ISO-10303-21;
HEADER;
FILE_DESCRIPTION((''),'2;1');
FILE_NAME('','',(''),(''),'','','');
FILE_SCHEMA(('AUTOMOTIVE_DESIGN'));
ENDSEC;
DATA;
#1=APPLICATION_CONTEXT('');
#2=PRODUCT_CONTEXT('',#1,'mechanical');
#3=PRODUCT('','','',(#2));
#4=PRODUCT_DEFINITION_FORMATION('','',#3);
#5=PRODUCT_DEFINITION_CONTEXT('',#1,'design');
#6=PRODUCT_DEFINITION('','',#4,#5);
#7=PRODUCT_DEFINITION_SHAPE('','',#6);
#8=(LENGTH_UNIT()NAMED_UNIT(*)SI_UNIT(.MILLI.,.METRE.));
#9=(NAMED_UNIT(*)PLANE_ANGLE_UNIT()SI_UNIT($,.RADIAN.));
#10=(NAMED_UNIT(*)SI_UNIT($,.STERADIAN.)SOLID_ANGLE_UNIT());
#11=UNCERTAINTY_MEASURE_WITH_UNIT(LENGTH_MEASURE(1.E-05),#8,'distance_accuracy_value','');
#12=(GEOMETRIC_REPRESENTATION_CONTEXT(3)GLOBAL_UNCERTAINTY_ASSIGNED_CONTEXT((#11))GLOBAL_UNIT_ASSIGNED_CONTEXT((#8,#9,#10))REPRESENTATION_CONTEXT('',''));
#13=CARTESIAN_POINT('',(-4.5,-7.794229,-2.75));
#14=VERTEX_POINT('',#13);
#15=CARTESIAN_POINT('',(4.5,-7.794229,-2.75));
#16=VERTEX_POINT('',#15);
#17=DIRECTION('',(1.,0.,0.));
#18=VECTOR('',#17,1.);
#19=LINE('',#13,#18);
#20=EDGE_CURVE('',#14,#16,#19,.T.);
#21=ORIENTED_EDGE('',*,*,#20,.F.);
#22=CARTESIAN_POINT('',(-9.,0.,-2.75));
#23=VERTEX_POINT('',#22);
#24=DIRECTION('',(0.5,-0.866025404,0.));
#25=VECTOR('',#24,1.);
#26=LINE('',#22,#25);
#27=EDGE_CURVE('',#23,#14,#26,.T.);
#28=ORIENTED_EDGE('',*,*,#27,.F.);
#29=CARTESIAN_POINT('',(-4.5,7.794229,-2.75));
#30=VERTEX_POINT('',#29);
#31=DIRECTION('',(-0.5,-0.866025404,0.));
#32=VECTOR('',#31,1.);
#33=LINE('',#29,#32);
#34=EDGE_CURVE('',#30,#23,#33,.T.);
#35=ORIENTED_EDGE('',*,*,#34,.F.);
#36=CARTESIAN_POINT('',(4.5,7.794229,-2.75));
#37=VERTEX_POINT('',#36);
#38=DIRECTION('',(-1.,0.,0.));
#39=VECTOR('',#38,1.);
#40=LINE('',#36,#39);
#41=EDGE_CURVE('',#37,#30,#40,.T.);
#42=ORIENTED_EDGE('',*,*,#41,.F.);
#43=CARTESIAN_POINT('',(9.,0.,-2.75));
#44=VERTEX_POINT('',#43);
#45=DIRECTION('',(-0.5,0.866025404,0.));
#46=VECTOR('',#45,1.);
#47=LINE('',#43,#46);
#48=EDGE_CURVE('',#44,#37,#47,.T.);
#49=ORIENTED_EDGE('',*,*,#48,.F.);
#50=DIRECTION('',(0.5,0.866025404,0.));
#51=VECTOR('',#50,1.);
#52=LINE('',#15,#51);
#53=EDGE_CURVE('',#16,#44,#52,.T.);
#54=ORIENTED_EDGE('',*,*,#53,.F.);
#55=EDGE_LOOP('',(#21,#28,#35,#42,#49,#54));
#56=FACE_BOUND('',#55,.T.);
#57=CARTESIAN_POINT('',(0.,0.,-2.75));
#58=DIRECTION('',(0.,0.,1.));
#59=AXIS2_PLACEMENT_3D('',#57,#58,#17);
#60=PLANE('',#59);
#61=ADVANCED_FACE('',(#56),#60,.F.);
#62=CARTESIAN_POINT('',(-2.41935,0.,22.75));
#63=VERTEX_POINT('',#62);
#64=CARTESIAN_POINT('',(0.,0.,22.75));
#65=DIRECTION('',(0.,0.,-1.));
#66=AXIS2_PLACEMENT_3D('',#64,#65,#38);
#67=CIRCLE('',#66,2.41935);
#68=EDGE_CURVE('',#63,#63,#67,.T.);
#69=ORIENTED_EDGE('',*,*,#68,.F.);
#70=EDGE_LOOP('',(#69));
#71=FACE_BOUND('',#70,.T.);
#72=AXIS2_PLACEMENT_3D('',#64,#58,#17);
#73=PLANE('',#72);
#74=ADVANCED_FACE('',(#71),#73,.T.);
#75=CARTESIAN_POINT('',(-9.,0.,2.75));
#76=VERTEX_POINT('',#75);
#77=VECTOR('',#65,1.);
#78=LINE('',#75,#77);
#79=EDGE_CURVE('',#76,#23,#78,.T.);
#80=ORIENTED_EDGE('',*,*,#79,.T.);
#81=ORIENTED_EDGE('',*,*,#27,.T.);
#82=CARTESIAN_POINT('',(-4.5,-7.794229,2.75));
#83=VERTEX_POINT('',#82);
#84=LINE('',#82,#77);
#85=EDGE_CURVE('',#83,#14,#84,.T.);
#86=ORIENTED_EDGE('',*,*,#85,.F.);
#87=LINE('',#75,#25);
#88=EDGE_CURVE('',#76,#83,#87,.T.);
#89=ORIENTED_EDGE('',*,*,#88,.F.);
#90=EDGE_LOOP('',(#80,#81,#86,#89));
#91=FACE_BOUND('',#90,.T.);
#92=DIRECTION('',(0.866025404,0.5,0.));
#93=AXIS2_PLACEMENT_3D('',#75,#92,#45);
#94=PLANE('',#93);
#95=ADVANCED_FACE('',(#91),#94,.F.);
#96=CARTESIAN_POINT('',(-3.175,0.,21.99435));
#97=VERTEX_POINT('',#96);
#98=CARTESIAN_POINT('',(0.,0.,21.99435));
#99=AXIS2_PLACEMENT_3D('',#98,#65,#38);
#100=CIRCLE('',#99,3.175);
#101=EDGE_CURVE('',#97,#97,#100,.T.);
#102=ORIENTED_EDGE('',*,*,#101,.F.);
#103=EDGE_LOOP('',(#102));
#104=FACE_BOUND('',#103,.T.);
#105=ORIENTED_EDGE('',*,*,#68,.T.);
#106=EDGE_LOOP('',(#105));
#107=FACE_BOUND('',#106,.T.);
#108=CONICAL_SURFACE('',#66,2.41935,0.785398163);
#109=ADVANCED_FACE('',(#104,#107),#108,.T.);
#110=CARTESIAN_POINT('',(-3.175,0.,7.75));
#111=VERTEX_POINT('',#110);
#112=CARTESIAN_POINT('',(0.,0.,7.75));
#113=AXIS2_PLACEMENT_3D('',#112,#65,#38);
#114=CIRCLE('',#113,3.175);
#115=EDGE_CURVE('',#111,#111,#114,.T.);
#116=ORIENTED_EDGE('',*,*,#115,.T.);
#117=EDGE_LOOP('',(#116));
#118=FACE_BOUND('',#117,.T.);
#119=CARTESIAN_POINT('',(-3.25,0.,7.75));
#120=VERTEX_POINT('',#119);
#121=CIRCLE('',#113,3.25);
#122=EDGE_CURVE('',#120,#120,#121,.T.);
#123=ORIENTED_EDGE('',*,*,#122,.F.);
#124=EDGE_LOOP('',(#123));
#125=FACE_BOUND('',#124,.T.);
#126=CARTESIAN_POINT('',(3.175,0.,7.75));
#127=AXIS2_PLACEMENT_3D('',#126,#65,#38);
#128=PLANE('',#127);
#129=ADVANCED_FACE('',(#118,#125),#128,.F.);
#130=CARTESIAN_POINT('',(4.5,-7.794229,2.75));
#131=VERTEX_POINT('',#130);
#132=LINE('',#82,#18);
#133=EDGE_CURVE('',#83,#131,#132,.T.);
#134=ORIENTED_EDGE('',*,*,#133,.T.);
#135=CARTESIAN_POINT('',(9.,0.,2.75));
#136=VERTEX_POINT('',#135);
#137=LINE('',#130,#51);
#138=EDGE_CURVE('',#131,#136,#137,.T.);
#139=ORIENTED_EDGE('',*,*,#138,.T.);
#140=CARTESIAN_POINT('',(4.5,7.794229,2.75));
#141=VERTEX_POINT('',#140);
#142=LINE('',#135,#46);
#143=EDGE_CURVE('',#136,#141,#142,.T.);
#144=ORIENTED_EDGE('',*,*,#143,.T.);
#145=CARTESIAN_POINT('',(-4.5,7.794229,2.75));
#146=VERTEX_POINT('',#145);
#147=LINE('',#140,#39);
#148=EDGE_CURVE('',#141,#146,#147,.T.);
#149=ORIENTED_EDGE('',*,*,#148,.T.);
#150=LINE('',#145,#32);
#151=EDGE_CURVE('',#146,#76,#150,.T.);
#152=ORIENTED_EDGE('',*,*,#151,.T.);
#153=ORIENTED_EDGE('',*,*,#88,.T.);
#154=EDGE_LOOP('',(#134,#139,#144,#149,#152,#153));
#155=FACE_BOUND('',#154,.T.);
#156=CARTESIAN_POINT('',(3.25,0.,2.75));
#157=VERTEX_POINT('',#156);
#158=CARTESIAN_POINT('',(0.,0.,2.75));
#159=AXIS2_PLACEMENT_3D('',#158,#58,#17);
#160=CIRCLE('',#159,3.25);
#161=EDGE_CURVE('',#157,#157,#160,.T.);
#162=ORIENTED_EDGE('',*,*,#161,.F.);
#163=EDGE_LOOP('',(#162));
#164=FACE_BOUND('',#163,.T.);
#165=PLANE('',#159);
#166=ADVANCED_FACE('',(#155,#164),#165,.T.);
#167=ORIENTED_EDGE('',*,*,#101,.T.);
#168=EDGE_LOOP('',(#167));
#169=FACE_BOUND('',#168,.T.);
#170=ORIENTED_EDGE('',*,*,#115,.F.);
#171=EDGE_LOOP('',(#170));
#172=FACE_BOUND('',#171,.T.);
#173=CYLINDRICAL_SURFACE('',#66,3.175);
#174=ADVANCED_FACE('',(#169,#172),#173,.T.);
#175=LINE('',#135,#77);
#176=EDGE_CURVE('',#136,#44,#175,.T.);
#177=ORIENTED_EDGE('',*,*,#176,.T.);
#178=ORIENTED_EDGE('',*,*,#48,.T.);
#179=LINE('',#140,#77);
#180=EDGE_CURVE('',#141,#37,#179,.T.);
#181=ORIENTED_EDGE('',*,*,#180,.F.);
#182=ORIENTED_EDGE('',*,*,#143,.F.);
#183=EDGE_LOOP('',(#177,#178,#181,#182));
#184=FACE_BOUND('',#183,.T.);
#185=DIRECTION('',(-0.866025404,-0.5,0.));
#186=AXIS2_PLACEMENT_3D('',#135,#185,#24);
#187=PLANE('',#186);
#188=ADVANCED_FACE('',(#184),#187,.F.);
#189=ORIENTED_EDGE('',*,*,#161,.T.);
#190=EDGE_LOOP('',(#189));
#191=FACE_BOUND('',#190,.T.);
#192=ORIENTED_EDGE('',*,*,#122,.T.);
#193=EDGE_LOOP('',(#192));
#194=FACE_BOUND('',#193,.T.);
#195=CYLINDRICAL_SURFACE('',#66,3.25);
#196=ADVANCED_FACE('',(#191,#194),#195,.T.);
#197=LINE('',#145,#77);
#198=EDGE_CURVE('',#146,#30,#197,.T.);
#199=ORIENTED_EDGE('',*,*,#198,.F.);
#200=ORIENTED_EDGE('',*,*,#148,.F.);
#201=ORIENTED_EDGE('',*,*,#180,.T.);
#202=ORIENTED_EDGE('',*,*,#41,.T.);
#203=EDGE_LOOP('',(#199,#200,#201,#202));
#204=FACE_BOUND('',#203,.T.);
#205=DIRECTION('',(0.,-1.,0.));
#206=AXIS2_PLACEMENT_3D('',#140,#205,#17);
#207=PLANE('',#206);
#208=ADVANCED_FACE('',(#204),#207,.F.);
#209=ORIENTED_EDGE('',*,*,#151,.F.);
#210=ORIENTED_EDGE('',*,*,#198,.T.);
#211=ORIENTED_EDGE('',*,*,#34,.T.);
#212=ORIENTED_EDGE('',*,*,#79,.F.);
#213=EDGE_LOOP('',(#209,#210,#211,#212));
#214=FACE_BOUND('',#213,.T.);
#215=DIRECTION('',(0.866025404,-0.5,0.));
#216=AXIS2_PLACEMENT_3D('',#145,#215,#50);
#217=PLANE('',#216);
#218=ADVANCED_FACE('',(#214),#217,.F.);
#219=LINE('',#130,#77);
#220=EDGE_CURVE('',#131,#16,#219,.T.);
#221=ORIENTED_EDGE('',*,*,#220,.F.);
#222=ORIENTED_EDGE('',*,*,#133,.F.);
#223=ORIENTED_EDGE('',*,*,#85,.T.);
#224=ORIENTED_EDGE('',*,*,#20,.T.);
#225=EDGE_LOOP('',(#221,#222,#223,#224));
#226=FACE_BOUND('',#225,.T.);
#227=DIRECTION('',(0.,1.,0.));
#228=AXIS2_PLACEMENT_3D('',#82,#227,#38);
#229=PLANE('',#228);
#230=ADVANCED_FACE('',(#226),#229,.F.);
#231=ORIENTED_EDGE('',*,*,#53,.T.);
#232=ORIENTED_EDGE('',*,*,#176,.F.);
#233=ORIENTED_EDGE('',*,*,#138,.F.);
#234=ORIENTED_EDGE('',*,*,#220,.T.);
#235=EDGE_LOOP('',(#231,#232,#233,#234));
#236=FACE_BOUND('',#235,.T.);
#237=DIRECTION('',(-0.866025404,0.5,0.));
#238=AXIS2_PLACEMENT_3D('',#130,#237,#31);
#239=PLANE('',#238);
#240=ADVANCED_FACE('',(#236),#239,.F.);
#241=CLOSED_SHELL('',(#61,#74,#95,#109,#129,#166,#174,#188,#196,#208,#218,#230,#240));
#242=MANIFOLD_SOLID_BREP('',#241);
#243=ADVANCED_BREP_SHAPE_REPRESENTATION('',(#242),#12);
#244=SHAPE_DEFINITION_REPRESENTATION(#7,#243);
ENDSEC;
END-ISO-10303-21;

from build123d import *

# Parameters (mm, degrees)
BOSS_EXTRUDE1_DEPTH = 2.75
SKETCH2_R           = 3.25
BOSS_EXTRUDE2_DEPTH = 20


# Read off the part's stored shape, not the designer's step: 1/4-20 Machine Threads Stud1
with BuildPart() as part:
    # Sketch1 → Boss-Extrude1 (new, symmetric)
    with BuildSketch(Plane.XY):
        Polygon((-9, 0), (-4.5, -7.794228634), (4.5, -7.794228634), (9, 0), (4.5, 7.794228634), (-4.5, 7.794228634), align=None)
    extrude(amount=BOSS_EXTRUDE1_DEPTH, both=True)

    # Sketch2 → Boss-Extrude2 (add)
    with BuildSketch(Plane.XY.offset(2.75)):
        Circle(SKETCH2_R)
    extrude(amount=BOSS_EXTRUDE2_DEPTH)

    # 1/4-20 Machine Threads Stud1 outline → 1/4-20 Machine Threads Stud1 (revolve, cut)
    with BuildSketch(Plane.XZ):
        Polygon((3.25, 22.75), (2.41935, 22.75), (3.175, 21.99435), (3.175, 7.75), (3.25, 7.75), align=None)
    revolve(axis=Axis((0, 0, 0), (0, 0, 1)), mode=Mode.SUBTRACT)


solid = part.part
